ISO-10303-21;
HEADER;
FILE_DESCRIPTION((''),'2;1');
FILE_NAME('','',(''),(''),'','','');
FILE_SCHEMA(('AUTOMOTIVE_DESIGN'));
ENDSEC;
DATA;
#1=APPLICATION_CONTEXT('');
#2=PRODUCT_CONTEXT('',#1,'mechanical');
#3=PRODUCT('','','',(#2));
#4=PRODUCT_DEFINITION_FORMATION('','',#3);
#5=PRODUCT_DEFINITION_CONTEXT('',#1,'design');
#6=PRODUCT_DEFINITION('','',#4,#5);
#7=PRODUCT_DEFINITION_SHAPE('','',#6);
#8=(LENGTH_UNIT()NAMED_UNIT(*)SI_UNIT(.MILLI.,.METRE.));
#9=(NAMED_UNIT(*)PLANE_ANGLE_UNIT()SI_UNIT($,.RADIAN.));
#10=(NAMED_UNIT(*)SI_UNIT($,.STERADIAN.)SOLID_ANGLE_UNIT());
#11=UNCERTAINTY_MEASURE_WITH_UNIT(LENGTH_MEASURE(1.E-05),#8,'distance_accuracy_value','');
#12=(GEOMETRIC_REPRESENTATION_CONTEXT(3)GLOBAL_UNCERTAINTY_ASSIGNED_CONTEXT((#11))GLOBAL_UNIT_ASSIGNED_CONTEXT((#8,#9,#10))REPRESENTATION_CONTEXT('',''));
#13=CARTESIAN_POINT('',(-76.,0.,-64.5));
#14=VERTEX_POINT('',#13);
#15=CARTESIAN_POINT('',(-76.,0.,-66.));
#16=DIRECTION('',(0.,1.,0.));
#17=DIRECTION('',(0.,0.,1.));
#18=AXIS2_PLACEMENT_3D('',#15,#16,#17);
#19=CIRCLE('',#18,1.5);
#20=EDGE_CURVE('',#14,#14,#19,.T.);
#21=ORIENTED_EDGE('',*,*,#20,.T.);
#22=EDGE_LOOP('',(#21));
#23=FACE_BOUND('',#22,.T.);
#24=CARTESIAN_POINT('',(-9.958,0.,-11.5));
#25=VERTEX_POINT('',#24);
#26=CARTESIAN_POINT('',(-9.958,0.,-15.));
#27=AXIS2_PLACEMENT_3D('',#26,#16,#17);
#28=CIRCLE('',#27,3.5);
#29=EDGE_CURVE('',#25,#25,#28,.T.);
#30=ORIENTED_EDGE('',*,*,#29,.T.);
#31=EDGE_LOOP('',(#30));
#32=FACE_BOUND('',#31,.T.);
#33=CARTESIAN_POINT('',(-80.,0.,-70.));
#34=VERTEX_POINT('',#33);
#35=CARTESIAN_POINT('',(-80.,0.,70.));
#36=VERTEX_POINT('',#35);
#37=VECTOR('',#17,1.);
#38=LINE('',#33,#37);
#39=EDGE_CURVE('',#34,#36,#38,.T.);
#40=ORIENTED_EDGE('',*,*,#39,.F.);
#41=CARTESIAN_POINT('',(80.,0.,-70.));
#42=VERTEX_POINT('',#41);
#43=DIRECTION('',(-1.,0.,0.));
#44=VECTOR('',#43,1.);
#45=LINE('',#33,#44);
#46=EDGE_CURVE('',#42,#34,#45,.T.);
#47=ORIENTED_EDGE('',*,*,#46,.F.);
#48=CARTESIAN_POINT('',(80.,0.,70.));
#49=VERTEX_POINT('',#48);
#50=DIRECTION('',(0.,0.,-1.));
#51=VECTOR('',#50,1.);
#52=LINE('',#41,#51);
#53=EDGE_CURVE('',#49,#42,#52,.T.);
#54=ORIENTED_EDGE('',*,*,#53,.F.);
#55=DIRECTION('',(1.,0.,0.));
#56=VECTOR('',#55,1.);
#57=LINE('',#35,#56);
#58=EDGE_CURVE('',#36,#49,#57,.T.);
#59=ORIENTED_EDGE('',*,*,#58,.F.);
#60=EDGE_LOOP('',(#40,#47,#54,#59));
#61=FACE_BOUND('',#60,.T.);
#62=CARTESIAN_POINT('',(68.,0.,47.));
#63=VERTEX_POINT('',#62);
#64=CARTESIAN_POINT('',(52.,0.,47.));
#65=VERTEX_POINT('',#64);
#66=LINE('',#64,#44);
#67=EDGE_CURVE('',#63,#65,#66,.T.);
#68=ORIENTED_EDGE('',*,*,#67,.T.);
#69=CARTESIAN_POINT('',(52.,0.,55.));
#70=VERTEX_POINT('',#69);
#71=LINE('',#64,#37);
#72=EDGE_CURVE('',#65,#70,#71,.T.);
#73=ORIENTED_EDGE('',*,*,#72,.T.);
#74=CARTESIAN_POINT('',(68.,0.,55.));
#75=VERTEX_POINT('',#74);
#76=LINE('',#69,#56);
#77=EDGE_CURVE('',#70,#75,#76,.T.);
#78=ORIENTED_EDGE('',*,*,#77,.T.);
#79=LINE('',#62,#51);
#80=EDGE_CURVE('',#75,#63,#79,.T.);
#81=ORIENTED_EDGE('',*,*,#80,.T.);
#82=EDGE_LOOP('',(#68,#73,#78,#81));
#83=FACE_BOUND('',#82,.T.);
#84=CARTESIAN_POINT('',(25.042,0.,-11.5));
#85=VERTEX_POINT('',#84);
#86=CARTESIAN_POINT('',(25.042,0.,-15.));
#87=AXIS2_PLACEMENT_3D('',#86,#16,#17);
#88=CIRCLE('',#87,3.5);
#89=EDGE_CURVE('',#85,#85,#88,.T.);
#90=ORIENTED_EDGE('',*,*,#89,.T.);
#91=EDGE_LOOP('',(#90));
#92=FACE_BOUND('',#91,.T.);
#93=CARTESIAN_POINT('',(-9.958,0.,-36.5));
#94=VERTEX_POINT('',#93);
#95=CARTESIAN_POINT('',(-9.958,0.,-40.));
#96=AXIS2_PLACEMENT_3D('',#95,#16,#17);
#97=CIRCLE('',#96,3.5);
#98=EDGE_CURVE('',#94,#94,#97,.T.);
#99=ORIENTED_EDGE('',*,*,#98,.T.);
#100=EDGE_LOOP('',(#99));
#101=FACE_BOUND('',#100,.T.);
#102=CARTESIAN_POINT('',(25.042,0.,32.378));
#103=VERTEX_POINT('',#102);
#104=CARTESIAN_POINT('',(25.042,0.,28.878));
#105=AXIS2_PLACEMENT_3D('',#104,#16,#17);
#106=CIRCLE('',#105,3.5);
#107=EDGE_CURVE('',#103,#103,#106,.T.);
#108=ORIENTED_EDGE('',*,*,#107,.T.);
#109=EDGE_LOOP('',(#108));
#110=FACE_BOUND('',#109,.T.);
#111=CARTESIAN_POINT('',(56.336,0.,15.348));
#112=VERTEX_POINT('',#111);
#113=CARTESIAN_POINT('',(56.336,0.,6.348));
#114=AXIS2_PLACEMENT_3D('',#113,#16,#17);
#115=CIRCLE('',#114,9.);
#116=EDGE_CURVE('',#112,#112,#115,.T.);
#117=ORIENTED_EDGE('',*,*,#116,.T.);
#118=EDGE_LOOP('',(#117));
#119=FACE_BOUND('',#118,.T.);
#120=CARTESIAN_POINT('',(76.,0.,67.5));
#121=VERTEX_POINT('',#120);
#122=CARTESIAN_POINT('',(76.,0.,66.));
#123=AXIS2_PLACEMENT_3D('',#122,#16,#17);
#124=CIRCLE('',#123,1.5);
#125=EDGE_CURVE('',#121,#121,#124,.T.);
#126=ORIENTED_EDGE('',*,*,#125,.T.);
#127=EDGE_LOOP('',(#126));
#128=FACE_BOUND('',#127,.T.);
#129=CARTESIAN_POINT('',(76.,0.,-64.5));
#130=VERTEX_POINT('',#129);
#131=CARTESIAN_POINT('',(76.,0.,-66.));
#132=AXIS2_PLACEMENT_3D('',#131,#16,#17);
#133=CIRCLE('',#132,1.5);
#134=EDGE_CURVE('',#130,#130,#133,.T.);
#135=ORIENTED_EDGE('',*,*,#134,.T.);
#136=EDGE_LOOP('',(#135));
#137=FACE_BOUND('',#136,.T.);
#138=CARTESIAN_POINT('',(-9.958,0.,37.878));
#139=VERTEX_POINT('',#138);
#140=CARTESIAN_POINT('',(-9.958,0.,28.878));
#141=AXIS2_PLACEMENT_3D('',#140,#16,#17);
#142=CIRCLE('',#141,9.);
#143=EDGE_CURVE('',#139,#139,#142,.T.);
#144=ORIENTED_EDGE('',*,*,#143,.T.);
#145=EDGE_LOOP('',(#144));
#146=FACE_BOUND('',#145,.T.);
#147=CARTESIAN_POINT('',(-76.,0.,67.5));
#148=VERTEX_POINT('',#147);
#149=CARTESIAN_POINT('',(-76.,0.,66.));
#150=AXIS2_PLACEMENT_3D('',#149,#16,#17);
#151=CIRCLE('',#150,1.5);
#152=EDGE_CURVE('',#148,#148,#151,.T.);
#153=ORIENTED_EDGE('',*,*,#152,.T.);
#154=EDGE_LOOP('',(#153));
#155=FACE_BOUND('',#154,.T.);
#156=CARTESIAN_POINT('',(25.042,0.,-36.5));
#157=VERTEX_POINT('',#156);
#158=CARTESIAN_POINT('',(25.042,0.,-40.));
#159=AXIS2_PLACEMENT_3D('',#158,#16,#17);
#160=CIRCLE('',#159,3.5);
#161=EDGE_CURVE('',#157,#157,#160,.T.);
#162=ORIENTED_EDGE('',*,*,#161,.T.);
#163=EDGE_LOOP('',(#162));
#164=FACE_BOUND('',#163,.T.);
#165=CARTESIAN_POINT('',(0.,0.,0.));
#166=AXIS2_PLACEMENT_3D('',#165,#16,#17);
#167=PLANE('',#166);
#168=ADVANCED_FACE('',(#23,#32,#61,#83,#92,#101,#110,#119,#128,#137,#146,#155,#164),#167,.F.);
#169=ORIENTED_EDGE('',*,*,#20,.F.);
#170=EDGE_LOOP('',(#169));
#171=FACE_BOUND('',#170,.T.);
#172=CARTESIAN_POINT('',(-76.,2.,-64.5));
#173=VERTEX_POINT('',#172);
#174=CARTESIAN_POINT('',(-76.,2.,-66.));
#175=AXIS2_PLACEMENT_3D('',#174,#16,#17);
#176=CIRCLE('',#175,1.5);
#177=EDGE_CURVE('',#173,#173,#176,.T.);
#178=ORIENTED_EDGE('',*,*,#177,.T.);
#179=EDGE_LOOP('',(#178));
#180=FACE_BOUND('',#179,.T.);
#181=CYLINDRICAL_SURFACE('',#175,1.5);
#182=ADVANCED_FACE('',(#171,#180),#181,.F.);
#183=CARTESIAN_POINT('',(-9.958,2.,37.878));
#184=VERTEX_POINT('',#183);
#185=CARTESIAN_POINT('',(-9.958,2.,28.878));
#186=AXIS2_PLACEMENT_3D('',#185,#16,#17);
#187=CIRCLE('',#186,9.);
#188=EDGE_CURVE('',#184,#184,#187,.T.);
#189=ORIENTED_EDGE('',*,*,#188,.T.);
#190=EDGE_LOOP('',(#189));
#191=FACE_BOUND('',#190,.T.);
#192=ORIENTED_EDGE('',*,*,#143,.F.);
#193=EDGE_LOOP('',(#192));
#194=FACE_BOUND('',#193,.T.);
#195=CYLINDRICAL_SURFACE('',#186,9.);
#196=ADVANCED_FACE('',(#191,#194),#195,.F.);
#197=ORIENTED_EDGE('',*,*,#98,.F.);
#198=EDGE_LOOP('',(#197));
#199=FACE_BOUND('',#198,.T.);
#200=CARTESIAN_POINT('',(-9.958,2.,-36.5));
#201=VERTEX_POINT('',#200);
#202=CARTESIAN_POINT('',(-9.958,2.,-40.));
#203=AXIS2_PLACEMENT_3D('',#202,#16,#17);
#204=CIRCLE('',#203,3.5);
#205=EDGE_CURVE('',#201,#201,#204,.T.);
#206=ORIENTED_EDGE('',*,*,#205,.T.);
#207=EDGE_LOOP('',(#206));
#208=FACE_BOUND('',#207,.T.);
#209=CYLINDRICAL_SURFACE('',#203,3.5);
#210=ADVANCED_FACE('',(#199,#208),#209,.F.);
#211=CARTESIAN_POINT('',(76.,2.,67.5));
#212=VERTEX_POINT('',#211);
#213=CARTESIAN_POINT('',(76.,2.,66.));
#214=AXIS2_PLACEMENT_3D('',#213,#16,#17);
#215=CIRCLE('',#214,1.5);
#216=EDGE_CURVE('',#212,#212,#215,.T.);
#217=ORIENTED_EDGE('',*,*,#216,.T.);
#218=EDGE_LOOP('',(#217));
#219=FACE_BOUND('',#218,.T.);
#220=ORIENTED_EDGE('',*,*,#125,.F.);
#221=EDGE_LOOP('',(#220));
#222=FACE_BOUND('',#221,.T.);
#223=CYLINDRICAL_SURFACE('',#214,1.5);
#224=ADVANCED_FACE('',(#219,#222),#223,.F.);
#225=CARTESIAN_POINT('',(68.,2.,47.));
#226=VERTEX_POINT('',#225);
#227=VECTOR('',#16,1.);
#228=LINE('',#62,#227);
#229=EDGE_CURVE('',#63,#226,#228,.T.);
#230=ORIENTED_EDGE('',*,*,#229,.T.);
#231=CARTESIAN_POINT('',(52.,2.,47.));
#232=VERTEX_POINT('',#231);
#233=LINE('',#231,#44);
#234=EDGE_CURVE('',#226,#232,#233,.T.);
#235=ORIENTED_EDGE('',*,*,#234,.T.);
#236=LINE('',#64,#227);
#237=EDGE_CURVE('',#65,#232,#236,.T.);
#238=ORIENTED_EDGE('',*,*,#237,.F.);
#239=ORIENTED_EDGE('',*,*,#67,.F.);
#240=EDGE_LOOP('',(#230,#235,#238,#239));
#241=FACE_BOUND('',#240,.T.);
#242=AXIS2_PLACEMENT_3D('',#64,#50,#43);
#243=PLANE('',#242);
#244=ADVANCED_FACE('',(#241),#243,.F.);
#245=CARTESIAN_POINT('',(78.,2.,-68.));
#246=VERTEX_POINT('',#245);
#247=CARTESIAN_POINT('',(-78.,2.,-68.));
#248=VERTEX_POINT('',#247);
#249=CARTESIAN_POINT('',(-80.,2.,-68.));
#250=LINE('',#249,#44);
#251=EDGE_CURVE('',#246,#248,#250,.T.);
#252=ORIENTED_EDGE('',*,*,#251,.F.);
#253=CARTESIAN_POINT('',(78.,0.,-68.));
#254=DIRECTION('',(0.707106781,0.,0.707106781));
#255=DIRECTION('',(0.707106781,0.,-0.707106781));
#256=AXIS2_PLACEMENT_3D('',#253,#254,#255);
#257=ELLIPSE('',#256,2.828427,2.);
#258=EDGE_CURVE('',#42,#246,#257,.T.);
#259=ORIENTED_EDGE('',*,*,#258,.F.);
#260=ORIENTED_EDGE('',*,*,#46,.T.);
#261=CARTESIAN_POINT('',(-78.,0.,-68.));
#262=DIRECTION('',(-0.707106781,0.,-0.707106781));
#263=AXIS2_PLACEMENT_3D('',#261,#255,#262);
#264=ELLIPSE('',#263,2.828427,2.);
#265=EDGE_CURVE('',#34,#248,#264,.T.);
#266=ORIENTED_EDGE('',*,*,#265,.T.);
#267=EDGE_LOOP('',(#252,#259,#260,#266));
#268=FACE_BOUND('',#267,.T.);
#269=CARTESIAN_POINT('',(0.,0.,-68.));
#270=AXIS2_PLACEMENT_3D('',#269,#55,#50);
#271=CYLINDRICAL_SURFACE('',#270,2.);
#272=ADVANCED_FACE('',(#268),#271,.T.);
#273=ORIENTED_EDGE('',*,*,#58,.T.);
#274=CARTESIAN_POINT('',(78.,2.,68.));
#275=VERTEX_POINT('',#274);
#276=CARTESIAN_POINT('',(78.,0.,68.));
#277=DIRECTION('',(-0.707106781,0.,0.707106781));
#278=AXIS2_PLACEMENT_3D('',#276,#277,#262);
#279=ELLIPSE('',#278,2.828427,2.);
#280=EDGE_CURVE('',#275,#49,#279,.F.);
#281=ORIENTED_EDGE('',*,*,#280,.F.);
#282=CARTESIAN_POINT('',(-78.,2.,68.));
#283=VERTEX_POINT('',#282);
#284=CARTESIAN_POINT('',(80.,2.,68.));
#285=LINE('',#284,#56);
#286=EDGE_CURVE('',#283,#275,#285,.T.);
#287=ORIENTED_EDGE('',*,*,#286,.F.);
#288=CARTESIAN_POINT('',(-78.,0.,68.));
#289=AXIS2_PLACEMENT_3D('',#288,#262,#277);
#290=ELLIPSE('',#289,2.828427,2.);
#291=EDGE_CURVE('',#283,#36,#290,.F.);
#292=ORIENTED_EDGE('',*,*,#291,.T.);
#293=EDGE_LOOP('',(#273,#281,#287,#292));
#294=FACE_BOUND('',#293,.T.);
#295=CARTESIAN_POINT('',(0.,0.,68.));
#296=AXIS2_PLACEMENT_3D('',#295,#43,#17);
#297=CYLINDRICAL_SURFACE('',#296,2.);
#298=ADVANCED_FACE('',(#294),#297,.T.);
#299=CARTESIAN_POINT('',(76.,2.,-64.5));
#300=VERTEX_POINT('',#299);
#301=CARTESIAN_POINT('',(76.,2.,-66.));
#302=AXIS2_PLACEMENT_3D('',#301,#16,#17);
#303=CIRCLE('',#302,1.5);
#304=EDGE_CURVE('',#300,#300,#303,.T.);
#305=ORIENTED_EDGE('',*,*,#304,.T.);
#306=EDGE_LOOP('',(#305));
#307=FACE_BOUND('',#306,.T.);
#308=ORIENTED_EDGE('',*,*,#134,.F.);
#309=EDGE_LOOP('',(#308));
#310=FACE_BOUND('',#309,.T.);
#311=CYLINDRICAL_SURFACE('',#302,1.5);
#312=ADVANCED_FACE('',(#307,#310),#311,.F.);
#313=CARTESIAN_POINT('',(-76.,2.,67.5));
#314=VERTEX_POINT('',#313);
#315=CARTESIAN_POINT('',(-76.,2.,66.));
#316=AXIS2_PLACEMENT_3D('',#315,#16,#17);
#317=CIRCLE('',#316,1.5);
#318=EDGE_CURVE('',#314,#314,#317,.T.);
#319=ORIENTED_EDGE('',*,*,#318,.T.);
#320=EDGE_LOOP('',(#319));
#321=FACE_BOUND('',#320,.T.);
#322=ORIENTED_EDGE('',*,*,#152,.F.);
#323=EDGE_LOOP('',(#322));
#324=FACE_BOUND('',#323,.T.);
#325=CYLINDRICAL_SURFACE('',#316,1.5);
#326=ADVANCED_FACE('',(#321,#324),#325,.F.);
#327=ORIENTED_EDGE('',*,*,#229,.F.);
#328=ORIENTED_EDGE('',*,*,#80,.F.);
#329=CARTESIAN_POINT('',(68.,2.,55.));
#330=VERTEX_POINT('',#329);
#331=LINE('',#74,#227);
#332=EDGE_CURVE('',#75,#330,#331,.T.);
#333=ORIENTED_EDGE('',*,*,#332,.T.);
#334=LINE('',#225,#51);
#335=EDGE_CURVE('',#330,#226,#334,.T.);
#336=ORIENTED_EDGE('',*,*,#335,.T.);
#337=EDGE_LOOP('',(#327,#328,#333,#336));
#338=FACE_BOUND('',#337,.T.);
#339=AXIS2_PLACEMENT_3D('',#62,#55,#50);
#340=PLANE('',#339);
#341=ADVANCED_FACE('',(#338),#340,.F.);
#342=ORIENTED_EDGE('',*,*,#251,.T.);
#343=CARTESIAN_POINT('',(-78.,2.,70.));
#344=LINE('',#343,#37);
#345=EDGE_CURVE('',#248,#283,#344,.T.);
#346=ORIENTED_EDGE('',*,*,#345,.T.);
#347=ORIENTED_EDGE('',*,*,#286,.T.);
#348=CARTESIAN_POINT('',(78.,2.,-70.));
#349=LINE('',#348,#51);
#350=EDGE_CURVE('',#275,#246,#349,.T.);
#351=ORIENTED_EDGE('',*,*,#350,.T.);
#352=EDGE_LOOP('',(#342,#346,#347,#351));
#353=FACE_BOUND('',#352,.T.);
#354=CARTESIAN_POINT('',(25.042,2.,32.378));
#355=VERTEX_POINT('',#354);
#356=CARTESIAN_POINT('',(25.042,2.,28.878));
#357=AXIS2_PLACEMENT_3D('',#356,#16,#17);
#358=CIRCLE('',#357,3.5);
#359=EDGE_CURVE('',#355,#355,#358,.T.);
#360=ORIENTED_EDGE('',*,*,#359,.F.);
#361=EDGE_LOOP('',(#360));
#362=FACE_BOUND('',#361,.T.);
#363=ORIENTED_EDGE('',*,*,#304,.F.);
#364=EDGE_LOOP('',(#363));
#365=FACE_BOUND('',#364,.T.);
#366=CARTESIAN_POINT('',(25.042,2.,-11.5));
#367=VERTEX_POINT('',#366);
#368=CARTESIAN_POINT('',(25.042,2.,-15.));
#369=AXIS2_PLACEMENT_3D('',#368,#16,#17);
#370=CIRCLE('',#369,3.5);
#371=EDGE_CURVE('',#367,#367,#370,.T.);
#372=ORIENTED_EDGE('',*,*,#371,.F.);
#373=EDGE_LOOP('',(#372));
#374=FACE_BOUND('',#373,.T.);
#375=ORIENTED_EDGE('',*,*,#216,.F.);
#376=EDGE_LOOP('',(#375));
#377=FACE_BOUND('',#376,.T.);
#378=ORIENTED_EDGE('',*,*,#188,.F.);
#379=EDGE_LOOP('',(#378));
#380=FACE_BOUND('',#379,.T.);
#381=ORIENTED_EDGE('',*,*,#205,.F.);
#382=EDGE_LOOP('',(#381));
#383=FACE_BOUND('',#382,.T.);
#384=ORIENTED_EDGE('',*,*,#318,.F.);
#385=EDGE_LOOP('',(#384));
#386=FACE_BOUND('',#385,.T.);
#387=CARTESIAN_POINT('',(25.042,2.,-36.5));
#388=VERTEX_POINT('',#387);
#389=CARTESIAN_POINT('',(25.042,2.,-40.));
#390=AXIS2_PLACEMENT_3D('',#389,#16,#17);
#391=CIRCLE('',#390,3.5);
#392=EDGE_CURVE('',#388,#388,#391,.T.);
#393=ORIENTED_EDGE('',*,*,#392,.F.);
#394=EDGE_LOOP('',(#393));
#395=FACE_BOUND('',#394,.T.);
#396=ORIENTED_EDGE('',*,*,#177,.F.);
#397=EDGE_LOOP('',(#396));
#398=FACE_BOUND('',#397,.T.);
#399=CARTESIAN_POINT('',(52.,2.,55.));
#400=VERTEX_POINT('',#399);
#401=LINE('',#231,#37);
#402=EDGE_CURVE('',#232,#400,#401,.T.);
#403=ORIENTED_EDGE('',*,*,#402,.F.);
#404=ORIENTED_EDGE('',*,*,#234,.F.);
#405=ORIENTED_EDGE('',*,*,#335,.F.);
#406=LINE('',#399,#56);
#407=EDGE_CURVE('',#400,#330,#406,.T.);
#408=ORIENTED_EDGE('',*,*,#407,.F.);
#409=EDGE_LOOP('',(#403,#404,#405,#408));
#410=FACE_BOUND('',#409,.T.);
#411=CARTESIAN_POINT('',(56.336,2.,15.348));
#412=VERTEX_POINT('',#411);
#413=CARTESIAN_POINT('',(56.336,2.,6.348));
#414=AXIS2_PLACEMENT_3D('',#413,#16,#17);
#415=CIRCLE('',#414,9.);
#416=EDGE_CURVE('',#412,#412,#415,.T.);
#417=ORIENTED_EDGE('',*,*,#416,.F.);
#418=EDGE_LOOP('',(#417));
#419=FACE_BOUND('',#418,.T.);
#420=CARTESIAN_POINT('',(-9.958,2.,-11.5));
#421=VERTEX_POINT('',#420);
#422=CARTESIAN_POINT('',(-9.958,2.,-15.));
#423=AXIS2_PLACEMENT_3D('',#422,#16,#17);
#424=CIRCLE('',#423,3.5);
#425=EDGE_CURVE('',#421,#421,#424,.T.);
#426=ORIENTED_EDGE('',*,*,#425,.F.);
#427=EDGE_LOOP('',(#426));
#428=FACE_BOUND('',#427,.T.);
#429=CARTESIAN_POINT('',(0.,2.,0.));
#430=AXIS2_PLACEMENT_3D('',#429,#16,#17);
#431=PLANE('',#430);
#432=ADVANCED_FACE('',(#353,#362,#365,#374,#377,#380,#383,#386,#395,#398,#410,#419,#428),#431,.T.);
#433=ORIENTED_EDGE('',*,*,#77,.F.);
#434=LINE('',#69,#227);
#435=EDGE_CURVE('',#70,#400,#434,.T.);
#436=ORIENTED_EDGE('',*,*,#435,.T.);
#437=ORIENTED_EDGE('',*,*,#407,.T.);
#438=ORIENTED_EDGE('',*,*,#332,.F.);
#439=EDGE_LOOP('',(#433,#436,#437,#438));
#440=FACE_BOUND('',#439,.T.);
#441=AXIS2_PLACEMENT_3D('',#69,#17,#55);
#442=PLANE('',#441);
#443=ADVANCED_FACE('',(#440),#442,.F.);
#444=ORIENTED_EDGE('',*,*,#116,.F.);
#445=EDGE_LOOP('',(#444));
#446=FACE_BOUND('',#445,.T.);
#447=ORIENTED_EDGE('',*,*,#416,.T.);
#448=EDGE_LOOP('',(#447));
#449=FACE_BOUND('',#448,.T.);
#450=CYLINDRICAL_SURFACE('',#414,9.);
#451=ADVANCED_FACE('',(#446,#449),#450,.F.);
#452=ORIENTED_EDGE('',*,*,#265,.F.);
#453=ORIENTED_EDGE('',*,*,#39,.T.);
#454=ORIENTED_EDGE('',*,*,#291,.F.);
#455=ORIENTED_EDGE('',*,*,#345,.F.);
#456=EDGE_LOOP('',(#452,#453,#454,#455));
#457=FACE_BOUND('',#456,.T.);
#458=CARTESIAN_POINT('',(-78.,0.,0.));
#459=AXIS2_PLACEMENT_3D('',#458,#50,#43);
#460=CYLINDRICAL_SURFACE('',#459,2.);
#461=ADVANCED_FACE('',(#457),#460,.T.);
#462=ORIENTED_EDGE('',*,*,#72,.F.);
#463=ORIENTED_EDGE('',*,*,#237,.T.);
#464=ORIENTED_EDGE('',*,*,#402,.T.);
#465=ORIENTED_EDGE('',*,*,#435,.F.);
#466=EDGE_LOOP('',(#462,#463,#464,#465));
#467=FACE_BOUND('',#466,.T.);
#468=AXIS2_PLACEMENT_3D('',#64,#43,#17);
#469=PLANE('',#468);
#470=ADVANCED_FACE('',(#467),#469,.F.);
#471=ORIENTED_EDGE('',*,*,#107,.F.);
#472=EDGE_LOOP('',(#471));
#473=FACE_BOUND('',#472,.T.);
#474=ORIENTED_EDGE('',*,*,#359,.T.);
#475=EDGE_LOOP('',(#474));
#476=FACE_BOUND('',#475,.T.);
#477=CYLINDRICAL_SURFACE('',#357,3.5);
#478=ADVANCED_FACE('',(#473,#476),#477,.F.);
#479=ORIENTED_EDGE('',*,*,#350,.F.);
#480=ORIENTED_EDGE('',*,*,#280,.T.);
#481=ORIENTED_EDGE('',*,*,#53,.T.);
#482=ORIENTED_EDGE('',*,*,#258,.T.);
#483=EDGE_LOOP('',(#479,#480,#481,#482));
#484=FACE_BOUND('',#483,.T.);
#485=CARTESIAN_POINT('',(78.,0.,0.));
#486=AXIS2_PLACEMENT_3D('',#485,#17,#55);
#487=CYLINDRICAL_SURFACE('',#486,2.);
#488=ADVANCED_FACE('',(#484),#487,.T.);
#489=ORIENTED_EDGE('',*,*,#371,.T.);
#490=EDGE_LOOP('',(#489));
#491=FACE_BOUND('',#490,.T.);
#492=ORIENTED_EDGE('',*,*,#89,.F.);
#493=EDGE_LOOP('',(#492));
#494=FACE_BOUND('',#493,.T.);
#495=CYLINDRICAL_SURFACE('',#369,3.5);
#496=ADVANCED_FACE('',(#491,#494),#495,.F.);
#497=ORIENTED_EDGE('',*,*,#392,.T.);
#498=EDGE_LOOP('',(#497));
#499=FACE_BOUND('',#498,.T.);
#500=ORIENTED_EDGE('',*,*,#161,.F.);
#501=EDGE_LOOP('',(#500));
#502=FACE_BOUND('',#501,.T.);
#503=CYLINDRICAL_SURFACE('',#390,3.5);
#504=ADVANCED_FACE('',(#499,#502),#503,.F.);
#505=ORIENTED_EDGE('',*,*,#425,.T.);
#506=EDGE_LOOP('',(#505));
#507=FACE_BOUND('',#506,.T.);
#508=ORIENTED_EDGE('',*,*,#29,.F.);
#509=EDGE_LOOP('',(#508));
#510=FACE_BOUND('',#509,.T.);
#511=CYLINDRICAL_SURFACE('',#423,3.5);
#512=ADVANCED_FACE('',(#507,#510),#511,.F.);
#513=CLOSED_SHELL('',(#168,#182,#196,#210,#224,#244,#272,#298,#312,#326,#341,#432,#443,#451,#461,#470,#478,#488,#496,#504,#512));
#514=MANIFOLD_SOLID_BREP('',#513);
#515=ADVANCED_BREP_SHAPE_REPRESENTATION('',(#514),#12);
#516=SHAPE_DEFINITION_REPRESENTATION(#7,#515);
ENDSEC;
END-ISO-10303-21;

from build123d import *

# Parameters (mm, degrees)
SKETCH1_W             = 160
SKETCH1_H             = 140
BOSS_EXTRUDE1_DEPTH   = 2
F_3_0MM_DOWEL_HOLE1_D = 3
F_1_5MM_DOWEL_HOLE4_D = 18
F_3_0MM_DOWEL_HOLE2_D = 7
FILLET2_R             = 2
SKETCH22_W            = 16
SKETCH22_H            = 8
CUT_EXTRUDE1_DEPTH    = 2


with BuildPart() as part:
    # Sketch1 → Boss-Extrude1 (new body)
    with BuildSketch(Plane(origin=(0, 0, 0), x_dir=(1, 0, 0), z_dir=(0, 1, 0))):
        Rectangle(SKETCH1_W, SKETCH1_H)
    extrude(amount=BOSS_EXTRUDE1_DEPTH)

    # Ø3.0mm Dowel Hole1 (through all)
    with Locations(Plane(origin=(0, 2, 0), x_dir=(1, 0, 0), z_dir=(0, 1, 0))):
        with Locations((-76, 66), (76, 66), (76, -66), (-76, -66)):
            Hole(F_3_0MM_DOWEL_HOLE1_D / 2)

    # Ø1.5mm Dowel Hole4 (through all)
    with Locations(Plane(origin=(0, 2, 0), x_dir=(1, 0, 0), z_dir=(0, 1, 0))):
        with Locations((56.336, -6.348), (-9.958, -28.878)):
            Hole(F_1_5MM_DOWEL_HOLE4_D / 2)

    # Ø3.0mm Dowel Hole2 (through all)
    with Locations(Plane(origin=(0, 2, 0), x_dir=(1, 0, 0), z_dir=(0, 1, 0))):
        with Locations((-9.958, 40), (25.042, 40), (-9.958, 15), (25.042, 15), (25.042, -28.878)):
            Hole(F_3_0MM_DOWEL_HOLE2_D / 2)

    # Fillet2
    fillet2_edges = [part.edges().sort_by_distance(p)[0] for p in [
        (80, 2, 0),
        (0, 2, -70),
        (-80, 2, 0),
        (0, 2, 70),
    ]]
    fillet(fillet2_edges, radius=FILLET2_R - 0.0001)  # a hair under: the kernel refuses the full size

    # Sketch22 → Cut-Extrude1 (cut)
    with BuildSketch(Plane(origin=(0, 2, 0), x_dir=(1, 0, 0), z_dir=(0, 1, 0))):
        with Locations((60, -51)):
            Rectangle(SKETCH22_W, SKETCH22_H)
    extrude(amount=-CUT_EXTRUDE1_DEPTH, mode=Mode.SUBTRACT)


solid = part.part
